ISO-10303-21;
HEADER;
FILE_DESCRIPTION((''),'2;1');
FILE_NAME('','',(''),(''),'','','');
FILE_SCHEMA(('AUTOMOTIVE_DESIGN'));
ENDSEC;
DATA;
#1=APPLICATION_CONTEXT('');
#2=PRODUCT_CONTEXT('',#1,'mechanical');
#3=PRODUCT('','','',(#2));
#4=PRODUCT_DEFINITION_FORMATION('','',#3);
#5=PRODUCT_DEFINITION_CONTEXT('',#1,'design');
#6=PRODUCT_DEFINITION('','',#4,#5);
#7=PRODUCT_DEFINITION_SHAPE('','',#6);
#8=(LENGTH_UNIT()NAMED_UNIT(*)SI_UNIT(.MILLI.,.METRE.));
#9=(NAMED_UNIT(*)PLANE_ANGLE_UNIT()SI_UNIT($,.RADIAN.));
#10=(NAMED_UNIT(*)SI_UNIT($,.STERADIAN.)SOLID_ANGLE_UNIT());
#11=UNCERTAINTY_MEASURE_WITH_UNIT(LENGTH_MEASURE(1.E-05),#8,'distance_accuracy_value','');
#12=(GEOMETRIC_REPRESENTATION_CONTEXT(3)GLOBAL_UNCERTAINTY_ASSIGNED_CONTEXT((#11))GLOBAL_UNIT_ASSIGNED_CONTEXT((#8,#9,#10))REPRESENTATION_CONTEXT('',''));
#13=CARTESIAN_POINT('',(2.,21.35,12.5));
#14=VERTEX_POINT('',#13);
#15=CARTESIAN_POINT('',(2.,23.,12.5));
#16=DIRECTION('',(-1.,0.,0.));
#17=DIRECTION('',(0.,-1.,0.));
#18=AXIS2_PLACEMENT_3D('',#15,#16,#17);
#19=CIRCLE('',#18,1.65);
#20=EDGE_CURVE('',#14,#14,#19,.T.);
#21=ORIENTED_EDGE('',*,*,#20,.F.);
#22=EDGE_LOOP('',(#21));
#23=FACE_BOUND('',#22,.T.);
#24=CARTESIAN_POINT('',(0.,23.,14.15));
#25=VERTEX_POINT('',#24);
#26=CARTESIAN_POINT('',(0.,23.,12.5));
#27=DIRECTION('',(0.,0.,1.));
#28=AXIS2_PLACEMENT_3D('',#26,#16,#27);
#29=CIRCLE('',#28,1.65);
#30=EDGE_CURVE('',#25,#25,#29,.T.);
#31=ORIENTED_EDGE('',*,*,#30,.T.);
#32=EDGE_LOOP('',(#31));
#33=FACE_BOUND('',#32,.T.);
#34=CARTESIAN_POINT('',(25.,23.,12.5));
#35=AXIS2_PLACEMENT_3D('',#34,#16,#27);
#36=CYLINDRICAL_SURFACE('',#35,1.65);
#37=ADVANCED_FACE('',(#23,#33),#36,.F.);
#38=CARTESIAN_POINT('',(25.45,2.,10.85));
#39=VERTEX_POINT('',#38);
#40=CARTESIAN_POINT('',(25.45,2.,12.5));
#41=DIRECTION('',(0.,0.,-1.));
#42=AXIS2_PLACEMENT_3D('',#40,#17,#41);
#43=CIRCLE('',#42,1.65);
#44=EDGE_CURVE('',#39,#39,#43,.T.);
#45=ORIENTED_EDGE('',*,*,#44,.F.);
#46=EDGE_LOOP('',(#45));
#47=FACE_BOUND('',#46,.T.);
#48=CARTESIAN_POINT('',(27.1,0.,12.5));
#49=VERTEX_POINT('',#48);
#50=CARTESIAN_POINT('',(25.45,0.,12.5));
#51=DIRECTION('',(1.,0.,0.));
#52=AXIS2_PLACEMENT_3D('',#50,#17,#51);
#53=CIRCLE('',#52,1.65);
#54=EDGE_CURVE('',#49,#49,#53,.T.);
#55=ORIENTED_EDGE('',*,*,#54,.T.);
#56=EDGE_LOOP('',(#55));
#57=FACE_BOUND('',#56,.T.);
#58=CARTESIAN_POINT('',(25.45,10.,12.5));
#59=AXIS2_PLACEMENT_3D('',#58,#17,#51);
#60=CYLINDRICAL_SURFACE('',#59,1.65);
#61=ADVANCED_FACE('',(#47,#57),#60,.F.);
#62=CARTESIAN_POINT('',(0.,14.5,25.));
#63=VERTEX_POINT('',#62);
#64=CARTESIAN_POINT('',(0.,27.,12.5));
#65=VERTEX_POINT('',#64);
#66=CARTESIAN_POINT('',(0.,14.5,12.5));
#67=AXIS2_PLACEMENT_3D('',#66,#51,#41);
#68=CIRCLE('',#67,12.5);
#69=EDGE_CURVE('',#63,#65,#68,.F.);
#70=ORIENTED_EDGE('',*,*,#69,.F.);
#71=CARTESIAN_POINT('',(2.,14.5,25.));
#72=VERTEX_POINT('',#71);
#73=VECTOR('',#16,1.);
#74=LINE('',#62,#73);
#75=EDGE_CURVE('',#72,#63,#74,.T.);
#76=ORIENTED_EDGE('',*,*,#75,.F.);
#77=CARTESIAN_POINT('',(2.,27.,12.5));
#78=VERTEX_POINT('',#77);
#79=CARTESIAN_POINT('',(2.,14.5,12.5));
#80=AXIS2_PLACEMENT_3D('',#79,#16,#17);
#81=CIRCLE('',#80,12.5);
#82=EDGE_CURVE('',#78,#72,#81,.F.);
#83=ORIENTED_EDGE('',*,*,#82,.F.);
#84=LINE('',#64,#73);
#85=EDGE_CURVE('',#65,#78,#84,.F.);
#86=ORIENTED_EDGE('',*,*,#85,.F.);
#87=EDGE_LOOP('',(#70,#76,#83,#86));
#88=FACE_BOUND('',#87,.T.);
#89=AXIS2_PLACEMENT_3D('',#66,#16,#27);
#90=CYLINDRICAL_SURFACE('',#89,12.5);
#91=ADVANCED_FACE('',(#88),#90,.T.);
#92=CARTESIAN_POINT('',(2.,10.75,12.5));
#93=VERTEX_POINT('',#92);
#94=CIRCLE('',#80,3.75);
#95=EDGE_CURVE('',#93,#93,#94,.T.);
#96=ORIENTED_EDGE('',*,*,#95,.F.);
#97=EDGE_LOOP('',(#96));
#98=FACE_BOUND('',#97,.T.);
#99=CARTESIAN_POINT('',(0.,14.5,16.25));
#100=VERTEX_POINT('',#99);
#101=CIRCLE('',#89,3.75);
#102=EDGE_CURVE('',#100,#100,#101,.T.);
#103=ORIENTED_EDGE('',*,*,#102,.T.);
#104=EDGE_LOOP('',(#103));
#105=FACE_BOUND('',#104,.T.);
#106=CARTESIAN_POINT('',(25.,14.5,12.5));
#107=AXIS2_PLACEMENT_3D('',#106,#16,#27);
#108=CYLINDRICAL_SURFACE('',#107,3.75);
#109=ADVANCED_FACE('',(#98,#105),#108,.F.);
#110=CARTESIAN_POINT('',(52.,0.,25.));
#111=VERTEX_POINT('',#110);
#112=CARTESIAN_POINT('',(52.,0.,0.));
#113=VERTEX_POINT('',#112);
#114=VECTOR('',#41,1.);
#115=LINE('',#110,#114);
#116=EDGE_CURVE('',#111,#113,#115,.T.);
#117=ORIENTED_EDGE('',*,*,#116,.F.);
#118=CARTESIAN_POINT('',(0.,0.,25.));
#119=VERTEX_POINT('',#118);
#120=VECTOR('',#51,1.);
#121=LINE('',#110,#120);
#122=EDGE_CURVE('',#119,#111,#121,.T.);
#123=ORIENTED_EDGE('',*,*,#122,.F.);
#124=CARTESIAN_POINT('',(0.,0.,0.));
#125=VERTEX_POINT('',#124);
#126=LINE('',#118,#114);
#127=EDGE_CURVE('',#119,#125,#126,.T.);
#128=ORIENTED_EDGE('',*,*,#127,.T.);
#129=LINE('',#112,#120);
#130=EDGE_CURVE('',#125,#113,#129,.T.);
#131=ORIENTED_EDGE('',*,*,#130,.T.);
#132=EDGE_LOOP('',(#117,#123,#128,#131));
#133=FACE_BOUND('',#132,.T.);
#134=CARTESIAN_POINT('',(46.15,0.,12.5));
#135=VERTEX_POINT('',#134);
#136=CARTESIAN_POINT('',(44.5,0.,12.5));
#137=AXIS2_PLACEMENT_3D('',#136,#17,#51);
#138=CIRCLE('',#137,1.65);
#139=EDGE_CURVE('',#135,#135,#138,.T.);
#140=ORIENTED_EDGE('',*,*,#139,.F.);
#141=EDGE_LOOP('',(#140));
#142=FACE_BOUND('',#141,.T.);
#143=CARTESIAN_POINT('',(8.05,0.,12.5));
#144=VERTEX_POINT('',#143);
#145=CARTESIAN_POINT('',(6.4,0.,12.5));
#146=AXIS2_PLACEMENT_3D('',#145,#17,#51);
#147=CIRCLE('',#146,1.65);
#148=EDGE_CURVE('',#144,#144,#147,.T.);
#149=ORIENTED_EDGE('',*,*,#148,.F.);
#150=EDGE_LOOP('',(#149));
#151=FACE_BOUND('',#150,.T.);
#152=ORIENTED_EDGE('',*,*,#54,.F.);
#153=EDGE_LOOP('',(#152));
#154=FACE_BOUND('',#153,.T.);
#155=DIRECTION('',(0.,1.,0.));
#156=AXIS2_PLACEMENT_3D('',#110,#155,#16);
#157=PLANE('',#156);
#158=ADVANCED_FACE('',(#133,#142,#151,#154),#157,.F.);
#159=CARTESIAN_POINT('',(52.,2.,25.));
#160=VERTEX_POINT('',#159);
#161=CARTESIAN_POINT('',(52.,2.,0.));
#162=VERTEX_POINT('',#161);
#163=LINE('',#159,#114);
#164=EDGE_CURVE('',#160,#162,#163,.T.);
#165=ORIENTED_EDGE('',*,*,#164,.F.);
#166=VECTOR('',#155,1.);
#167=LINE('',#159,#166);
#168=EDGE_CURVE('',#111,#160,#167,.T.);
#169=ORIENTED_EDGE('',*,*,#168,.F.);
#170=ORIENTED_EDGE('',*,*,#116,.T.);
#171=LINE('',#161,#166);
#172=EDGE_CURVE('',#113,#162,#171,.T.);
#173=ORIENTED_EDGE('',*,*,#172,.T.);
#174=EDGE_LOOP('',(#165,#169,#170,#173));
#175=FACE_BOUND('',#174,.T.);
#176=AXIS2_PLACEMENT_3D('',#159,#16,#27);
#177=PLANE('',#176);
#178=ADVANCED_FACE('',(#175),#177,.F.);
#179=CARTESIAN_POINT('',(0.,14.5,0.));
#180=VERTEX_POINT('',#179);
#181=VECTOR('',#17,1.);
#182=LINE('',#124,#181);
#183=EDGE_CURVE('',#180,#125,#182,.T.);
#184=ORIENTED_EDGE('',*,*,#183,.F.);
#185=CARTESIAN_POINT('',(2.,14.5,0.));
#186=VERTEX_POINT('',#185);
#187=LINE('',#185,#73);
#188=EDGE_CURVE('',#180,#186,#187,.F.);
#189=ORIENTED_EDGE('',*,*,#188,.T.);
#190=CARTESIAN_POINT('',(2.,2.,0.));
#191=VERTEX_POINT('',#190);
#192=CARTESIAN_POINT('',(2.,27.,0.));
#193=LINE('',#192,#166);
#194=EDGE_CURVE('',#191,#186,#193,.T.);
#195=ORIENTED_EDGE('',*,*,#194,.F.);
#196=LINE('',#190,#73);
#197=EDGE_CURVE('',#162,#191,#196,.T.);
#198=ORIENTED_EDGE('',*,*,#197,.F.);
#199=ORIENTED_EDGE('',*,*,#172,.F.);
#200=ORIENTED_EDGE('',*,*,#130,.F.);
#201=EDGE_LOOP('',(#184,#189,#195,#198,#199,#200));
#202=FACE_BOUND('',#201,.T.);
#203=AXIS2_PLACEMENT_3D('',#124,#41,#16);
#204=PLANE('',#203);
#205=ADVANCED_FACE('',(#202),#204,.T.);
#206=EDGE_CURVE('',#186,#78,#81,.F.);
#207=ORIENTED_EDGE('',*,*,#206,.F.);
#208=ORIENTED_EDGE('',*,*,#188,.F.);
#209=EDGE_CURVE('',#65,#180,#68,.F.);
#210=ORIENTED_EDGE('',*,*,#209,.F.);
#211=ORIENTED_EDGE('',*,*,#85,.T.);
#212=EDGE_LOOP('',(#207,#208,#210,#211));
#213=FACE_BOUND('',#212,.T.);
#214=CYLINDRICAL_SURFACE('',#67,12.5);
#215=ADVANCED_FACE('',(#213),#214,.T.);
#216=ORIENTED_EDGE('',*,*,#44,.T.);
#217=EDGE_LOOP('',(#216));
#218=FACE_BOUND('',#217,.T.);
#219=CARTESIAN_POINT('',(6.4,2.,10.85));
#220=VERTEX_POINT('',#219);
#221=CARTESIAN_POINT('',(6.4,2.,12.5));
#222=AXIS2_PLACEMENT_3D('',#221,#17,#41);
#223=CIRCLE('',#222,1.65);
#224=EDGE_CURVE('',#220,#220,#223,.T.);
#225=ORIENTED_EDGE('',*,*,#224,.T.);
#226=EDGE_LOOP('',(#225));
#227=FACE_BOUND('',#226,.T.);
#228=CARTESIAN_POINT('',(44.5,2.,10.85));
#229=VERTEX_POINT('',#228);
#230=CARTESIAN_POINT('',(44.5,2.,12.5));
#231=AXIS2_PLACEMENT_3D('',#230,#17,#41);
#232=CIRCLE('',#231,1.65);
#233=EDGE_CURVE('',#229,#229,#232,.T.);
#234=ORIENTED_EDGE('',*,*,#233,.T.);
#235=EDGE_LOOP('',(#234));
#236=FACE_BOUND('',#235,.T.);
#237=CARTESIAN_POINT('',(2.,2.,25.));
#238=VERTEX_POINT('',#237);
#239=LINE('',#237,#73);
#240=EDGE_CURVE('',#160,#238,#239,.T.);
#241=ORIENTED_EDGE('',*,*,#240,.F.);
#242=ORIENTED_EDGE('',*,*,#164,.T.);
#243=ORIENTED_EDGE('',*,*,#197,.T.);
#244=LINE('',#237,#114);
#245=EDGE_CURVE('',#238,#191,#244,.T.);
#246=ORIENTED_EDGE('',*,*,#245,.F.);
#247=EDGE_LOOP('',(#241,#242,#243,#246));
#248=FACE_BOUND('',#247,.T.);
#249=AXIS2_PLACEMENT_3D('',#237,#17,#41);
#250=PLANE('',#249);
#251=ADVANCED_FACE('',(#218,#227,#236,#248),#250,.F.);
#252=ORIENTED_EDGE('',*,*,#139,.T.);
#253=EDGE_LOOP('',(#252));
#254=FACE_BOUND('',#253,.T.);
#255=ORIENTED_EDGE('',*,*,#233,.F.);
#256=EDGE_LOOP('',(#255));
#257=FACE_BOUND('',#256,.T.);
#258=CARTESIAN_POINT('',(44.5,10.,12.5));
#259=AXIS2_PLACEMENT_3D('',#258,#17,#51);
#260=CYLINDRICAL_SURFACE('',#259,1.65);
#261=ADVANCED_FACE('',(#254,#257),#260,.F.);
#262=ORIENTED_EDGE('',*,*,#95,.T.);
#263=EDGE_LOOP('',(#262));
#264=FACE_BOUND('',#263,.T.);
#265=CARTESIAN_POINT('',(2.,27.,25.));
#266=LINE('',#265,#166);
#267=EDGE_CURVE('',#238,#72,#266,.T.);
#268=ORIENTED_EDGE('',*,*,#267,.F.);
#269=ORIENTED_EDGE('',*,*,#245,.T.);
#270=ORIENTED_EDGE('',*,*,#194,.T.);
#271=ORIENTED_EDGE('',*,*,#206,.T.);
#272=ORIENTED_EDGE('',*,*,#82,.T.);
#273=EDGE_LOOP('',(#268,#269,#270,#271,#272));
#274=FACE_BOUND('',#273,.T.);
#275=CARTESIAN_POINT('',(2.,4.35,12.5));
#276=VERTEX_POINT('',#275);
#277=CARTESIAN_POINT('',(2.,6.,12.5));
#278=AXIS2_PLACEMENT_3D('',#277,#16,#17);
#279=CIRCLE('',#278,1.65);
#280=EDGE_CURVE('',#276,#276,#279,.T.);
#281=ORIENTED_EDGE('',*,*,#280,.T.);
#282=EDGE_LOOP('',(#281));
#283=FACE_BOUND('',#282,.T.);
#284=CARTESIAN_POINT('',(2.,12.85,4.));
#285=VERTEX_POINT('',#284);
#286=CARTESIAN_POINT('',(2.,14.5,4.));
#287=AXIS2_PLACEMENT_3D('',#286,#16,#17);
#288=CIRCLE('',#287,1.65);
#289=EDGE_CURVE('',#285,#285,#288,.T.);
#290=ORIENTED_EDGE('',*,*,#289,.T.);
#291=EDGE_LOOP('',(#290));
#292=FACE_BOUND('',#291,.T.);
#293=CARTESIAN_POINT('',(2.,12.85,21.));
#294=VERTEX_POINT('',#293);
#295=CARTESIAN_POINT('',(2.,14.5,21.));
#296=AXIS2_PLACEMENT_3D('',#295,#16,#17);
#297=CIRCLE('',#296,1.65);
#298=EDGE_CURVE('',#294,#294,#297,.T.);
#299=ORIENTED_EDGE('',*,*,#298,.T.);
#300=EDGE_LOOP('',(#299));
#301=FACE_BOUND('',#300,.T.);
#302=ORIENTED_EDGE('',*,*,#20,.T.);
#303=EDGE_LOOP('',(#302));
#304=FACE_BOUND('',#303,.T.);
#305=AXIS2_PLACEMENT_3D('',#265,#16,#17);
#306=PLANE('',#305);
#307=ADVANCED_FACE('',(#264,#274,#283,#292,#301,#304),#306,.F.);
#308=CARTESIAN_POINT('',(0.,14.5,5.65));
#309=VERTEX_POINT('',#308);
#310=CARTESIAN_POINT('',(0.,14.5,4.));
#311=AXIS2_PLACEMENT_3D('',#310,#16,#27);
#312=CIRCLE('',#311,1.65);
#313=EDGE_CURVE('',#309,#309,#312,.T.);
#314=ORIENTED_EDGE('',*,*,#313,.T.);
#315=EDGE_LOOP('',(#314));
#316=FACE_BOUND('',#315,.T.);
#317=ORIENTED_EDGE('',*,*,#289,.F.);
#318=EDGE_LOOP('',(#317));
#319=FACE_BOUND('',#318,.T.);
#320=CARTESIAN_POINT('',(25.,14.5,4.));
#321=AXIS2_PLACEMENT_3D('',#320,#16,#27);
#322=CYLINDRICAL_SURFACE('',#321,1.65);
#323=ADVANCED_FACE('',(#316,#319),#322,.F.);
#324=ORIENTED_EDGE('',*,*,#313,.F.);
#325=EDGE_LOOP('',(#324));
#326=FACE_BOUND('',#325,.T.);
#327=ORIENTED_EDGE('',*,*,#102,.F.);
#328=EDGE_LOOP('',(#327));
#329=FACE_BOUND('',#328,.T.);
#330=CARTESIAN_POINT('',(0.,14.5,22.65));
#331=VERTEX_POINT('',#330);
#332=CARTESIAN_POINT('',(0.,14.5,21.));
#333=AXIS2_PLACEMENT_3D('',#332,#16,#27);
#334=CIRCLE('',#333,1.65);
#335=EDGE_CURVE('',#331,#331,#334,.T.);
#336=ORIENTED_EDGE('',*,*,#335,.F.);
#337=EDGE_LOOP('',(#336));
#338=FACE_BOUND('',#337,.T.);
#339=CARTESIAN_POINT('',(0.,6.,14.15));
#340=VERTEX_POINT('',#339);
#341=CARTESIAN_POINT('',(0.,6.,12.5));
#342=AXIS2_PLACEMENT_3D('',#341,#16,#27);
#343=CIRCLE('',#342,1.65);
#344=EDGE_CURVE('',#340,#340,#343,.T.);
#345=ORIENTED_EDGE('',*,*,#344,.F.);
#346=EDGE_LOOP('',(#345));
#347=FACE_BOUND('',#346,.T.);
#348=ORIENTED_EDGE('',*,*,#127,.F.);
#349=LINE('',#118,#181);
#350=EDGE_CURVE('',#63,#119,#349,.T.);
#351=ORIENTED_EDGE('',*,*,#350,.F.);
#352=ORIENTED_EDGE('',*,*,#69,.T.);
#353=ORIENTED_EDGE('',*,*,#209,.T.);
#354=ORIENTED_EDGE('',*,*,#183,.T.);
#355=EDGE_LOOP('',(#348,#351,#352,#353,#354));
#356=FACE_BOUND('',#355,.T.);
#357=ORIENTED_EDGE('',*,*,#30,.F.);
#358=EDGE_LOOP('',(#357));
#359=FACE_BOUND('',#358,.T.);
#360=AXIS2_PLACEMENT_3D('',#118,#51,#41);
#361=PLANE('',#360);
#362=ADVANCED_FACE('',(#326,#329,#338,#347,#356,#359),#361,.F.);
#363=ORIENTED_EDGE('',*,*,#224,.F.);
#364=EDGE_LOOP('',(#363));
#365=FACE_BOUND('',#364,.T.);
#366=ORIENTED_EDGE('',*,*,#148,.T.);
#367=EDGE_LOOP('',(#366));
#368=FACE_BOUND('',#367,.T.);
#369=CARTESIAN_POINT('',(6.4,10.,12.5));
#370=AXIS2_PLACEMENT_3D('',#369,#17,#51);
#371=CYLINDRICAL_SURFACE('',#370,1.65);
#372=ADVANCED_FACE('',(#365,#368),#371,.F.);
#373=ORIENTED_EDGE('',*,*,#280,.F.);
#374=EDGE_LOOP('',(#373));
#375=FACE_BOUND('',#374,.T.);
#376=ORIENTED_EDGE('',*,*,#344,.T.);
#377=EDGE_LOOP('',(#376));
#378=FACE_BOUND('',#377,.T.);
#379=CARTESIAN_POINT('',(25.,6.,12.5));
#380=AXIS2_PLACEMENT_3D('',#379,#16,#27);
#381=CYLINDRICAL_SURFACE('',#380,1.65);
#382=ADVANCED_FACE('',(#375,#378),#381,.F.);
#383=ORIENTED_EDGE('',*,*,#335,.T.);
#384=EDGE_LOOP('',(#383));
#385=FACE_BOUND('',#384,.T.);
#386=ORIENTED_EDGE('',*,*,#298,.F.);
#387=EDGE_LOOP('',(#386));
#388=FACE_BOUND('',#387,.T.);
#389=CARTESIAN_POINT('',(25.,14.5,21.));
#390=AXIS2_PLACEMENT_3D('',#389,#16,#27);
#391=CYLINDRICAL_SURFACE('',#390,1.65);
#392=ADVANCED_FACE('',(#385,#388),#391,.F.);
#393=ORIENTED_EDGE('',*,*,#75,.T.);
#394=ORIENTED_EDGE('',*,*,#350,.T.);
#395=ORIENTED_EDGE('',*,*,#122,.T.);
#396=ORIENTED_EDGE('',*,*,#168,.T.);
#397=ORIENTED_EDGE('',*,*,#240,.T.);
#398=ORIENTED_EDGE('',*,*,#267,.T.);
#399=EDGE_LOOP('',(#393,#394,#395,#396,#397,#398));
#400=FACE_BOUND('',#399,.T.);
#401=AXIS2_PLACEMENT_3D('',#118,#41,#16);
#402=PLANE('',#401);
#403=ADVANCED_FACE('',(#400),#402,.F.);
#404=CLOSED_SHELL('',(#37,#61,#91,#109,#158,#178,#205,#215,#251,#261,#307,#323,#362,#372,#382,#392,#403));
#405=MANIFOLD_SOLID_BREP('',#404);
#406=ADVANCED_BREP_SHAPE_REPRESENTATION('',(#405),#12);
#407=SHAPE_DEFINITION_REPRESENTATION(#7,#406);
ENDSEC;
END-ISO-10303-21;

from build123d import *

# Parameters (mm, degrees)
P_IDAT_VYSUNUT_M1_DEPTH  = 25
SKICA2_R                 = 3.75
SKICA2_R_2               = 1.65
ODEBRAT_VYSUNUT_M2_DEPTH = 25
ZAOBLIT2_R               = 12.5
SKICA3_R                 = 1.65
ODEBRAT_VYSUNUT_M3_DEPTH = 10


with BuildPart() as part:
    # Skica1 → Přidat vysunutím1 (new body)
    with BuildSketch(Plane.XY):
        Polygon((0, 0), (0, 27), (2, 27), (2, 2), (52, 2), (52, 0), align=None)
    extrude(amount=P_IDAT_VYSUNUT_M1_DEPTH)

    # Skica2 → Odebrat vysunutím2 (cut)
    with BuildSketch(Plane.ZY):
        with Locations((12.5, 14.5)):
            Circle(SKICA2_R)
        with Locations((12.5, 23)):
            Circle(SKICA2_R_2)
        with Locations((21, 14.5)):
            Circle(SKICA2_R_2)
        with Locations((4, 14.5)):
            Circle(SKICA2_R_2)
        with Locations((12.5, 6)):
            Circle(SKICA2_R_2)
    extrude(amount=-ODEBRAT_VYSUNUT_M2_DEPTH, mode=Mode.SUBTRACT)

    # Zaoblit2
    zaoblit2_edges = [part.edges().sort_by_distance(p)[0] for p in [
        (1, 27, 0),
        (1, 27, 25),
    ]]
    fillet(zaoblit2_edges, radius=ZAOBLIT2_R - 0.0001)  # a hair under: the kernel refuses the full size

    # Skica3 → Odebrat vysunutím3 (cut)
    with BuildSketch(Plane.XZ):
        with Locations((6.4, 12.5)):
            Circle(SKICA3_R)
        with Locations((25.45, 12.5)):
            Circle(SKICA3_R)
        with Locations((44.5, 12.5)):
            Circle(SKICA3_R)
    extrude(amount=-ODEBRAT_VYSUNUT_M3_DEPTH, mode=Mode.SUBTRACT)


solid = part.part
